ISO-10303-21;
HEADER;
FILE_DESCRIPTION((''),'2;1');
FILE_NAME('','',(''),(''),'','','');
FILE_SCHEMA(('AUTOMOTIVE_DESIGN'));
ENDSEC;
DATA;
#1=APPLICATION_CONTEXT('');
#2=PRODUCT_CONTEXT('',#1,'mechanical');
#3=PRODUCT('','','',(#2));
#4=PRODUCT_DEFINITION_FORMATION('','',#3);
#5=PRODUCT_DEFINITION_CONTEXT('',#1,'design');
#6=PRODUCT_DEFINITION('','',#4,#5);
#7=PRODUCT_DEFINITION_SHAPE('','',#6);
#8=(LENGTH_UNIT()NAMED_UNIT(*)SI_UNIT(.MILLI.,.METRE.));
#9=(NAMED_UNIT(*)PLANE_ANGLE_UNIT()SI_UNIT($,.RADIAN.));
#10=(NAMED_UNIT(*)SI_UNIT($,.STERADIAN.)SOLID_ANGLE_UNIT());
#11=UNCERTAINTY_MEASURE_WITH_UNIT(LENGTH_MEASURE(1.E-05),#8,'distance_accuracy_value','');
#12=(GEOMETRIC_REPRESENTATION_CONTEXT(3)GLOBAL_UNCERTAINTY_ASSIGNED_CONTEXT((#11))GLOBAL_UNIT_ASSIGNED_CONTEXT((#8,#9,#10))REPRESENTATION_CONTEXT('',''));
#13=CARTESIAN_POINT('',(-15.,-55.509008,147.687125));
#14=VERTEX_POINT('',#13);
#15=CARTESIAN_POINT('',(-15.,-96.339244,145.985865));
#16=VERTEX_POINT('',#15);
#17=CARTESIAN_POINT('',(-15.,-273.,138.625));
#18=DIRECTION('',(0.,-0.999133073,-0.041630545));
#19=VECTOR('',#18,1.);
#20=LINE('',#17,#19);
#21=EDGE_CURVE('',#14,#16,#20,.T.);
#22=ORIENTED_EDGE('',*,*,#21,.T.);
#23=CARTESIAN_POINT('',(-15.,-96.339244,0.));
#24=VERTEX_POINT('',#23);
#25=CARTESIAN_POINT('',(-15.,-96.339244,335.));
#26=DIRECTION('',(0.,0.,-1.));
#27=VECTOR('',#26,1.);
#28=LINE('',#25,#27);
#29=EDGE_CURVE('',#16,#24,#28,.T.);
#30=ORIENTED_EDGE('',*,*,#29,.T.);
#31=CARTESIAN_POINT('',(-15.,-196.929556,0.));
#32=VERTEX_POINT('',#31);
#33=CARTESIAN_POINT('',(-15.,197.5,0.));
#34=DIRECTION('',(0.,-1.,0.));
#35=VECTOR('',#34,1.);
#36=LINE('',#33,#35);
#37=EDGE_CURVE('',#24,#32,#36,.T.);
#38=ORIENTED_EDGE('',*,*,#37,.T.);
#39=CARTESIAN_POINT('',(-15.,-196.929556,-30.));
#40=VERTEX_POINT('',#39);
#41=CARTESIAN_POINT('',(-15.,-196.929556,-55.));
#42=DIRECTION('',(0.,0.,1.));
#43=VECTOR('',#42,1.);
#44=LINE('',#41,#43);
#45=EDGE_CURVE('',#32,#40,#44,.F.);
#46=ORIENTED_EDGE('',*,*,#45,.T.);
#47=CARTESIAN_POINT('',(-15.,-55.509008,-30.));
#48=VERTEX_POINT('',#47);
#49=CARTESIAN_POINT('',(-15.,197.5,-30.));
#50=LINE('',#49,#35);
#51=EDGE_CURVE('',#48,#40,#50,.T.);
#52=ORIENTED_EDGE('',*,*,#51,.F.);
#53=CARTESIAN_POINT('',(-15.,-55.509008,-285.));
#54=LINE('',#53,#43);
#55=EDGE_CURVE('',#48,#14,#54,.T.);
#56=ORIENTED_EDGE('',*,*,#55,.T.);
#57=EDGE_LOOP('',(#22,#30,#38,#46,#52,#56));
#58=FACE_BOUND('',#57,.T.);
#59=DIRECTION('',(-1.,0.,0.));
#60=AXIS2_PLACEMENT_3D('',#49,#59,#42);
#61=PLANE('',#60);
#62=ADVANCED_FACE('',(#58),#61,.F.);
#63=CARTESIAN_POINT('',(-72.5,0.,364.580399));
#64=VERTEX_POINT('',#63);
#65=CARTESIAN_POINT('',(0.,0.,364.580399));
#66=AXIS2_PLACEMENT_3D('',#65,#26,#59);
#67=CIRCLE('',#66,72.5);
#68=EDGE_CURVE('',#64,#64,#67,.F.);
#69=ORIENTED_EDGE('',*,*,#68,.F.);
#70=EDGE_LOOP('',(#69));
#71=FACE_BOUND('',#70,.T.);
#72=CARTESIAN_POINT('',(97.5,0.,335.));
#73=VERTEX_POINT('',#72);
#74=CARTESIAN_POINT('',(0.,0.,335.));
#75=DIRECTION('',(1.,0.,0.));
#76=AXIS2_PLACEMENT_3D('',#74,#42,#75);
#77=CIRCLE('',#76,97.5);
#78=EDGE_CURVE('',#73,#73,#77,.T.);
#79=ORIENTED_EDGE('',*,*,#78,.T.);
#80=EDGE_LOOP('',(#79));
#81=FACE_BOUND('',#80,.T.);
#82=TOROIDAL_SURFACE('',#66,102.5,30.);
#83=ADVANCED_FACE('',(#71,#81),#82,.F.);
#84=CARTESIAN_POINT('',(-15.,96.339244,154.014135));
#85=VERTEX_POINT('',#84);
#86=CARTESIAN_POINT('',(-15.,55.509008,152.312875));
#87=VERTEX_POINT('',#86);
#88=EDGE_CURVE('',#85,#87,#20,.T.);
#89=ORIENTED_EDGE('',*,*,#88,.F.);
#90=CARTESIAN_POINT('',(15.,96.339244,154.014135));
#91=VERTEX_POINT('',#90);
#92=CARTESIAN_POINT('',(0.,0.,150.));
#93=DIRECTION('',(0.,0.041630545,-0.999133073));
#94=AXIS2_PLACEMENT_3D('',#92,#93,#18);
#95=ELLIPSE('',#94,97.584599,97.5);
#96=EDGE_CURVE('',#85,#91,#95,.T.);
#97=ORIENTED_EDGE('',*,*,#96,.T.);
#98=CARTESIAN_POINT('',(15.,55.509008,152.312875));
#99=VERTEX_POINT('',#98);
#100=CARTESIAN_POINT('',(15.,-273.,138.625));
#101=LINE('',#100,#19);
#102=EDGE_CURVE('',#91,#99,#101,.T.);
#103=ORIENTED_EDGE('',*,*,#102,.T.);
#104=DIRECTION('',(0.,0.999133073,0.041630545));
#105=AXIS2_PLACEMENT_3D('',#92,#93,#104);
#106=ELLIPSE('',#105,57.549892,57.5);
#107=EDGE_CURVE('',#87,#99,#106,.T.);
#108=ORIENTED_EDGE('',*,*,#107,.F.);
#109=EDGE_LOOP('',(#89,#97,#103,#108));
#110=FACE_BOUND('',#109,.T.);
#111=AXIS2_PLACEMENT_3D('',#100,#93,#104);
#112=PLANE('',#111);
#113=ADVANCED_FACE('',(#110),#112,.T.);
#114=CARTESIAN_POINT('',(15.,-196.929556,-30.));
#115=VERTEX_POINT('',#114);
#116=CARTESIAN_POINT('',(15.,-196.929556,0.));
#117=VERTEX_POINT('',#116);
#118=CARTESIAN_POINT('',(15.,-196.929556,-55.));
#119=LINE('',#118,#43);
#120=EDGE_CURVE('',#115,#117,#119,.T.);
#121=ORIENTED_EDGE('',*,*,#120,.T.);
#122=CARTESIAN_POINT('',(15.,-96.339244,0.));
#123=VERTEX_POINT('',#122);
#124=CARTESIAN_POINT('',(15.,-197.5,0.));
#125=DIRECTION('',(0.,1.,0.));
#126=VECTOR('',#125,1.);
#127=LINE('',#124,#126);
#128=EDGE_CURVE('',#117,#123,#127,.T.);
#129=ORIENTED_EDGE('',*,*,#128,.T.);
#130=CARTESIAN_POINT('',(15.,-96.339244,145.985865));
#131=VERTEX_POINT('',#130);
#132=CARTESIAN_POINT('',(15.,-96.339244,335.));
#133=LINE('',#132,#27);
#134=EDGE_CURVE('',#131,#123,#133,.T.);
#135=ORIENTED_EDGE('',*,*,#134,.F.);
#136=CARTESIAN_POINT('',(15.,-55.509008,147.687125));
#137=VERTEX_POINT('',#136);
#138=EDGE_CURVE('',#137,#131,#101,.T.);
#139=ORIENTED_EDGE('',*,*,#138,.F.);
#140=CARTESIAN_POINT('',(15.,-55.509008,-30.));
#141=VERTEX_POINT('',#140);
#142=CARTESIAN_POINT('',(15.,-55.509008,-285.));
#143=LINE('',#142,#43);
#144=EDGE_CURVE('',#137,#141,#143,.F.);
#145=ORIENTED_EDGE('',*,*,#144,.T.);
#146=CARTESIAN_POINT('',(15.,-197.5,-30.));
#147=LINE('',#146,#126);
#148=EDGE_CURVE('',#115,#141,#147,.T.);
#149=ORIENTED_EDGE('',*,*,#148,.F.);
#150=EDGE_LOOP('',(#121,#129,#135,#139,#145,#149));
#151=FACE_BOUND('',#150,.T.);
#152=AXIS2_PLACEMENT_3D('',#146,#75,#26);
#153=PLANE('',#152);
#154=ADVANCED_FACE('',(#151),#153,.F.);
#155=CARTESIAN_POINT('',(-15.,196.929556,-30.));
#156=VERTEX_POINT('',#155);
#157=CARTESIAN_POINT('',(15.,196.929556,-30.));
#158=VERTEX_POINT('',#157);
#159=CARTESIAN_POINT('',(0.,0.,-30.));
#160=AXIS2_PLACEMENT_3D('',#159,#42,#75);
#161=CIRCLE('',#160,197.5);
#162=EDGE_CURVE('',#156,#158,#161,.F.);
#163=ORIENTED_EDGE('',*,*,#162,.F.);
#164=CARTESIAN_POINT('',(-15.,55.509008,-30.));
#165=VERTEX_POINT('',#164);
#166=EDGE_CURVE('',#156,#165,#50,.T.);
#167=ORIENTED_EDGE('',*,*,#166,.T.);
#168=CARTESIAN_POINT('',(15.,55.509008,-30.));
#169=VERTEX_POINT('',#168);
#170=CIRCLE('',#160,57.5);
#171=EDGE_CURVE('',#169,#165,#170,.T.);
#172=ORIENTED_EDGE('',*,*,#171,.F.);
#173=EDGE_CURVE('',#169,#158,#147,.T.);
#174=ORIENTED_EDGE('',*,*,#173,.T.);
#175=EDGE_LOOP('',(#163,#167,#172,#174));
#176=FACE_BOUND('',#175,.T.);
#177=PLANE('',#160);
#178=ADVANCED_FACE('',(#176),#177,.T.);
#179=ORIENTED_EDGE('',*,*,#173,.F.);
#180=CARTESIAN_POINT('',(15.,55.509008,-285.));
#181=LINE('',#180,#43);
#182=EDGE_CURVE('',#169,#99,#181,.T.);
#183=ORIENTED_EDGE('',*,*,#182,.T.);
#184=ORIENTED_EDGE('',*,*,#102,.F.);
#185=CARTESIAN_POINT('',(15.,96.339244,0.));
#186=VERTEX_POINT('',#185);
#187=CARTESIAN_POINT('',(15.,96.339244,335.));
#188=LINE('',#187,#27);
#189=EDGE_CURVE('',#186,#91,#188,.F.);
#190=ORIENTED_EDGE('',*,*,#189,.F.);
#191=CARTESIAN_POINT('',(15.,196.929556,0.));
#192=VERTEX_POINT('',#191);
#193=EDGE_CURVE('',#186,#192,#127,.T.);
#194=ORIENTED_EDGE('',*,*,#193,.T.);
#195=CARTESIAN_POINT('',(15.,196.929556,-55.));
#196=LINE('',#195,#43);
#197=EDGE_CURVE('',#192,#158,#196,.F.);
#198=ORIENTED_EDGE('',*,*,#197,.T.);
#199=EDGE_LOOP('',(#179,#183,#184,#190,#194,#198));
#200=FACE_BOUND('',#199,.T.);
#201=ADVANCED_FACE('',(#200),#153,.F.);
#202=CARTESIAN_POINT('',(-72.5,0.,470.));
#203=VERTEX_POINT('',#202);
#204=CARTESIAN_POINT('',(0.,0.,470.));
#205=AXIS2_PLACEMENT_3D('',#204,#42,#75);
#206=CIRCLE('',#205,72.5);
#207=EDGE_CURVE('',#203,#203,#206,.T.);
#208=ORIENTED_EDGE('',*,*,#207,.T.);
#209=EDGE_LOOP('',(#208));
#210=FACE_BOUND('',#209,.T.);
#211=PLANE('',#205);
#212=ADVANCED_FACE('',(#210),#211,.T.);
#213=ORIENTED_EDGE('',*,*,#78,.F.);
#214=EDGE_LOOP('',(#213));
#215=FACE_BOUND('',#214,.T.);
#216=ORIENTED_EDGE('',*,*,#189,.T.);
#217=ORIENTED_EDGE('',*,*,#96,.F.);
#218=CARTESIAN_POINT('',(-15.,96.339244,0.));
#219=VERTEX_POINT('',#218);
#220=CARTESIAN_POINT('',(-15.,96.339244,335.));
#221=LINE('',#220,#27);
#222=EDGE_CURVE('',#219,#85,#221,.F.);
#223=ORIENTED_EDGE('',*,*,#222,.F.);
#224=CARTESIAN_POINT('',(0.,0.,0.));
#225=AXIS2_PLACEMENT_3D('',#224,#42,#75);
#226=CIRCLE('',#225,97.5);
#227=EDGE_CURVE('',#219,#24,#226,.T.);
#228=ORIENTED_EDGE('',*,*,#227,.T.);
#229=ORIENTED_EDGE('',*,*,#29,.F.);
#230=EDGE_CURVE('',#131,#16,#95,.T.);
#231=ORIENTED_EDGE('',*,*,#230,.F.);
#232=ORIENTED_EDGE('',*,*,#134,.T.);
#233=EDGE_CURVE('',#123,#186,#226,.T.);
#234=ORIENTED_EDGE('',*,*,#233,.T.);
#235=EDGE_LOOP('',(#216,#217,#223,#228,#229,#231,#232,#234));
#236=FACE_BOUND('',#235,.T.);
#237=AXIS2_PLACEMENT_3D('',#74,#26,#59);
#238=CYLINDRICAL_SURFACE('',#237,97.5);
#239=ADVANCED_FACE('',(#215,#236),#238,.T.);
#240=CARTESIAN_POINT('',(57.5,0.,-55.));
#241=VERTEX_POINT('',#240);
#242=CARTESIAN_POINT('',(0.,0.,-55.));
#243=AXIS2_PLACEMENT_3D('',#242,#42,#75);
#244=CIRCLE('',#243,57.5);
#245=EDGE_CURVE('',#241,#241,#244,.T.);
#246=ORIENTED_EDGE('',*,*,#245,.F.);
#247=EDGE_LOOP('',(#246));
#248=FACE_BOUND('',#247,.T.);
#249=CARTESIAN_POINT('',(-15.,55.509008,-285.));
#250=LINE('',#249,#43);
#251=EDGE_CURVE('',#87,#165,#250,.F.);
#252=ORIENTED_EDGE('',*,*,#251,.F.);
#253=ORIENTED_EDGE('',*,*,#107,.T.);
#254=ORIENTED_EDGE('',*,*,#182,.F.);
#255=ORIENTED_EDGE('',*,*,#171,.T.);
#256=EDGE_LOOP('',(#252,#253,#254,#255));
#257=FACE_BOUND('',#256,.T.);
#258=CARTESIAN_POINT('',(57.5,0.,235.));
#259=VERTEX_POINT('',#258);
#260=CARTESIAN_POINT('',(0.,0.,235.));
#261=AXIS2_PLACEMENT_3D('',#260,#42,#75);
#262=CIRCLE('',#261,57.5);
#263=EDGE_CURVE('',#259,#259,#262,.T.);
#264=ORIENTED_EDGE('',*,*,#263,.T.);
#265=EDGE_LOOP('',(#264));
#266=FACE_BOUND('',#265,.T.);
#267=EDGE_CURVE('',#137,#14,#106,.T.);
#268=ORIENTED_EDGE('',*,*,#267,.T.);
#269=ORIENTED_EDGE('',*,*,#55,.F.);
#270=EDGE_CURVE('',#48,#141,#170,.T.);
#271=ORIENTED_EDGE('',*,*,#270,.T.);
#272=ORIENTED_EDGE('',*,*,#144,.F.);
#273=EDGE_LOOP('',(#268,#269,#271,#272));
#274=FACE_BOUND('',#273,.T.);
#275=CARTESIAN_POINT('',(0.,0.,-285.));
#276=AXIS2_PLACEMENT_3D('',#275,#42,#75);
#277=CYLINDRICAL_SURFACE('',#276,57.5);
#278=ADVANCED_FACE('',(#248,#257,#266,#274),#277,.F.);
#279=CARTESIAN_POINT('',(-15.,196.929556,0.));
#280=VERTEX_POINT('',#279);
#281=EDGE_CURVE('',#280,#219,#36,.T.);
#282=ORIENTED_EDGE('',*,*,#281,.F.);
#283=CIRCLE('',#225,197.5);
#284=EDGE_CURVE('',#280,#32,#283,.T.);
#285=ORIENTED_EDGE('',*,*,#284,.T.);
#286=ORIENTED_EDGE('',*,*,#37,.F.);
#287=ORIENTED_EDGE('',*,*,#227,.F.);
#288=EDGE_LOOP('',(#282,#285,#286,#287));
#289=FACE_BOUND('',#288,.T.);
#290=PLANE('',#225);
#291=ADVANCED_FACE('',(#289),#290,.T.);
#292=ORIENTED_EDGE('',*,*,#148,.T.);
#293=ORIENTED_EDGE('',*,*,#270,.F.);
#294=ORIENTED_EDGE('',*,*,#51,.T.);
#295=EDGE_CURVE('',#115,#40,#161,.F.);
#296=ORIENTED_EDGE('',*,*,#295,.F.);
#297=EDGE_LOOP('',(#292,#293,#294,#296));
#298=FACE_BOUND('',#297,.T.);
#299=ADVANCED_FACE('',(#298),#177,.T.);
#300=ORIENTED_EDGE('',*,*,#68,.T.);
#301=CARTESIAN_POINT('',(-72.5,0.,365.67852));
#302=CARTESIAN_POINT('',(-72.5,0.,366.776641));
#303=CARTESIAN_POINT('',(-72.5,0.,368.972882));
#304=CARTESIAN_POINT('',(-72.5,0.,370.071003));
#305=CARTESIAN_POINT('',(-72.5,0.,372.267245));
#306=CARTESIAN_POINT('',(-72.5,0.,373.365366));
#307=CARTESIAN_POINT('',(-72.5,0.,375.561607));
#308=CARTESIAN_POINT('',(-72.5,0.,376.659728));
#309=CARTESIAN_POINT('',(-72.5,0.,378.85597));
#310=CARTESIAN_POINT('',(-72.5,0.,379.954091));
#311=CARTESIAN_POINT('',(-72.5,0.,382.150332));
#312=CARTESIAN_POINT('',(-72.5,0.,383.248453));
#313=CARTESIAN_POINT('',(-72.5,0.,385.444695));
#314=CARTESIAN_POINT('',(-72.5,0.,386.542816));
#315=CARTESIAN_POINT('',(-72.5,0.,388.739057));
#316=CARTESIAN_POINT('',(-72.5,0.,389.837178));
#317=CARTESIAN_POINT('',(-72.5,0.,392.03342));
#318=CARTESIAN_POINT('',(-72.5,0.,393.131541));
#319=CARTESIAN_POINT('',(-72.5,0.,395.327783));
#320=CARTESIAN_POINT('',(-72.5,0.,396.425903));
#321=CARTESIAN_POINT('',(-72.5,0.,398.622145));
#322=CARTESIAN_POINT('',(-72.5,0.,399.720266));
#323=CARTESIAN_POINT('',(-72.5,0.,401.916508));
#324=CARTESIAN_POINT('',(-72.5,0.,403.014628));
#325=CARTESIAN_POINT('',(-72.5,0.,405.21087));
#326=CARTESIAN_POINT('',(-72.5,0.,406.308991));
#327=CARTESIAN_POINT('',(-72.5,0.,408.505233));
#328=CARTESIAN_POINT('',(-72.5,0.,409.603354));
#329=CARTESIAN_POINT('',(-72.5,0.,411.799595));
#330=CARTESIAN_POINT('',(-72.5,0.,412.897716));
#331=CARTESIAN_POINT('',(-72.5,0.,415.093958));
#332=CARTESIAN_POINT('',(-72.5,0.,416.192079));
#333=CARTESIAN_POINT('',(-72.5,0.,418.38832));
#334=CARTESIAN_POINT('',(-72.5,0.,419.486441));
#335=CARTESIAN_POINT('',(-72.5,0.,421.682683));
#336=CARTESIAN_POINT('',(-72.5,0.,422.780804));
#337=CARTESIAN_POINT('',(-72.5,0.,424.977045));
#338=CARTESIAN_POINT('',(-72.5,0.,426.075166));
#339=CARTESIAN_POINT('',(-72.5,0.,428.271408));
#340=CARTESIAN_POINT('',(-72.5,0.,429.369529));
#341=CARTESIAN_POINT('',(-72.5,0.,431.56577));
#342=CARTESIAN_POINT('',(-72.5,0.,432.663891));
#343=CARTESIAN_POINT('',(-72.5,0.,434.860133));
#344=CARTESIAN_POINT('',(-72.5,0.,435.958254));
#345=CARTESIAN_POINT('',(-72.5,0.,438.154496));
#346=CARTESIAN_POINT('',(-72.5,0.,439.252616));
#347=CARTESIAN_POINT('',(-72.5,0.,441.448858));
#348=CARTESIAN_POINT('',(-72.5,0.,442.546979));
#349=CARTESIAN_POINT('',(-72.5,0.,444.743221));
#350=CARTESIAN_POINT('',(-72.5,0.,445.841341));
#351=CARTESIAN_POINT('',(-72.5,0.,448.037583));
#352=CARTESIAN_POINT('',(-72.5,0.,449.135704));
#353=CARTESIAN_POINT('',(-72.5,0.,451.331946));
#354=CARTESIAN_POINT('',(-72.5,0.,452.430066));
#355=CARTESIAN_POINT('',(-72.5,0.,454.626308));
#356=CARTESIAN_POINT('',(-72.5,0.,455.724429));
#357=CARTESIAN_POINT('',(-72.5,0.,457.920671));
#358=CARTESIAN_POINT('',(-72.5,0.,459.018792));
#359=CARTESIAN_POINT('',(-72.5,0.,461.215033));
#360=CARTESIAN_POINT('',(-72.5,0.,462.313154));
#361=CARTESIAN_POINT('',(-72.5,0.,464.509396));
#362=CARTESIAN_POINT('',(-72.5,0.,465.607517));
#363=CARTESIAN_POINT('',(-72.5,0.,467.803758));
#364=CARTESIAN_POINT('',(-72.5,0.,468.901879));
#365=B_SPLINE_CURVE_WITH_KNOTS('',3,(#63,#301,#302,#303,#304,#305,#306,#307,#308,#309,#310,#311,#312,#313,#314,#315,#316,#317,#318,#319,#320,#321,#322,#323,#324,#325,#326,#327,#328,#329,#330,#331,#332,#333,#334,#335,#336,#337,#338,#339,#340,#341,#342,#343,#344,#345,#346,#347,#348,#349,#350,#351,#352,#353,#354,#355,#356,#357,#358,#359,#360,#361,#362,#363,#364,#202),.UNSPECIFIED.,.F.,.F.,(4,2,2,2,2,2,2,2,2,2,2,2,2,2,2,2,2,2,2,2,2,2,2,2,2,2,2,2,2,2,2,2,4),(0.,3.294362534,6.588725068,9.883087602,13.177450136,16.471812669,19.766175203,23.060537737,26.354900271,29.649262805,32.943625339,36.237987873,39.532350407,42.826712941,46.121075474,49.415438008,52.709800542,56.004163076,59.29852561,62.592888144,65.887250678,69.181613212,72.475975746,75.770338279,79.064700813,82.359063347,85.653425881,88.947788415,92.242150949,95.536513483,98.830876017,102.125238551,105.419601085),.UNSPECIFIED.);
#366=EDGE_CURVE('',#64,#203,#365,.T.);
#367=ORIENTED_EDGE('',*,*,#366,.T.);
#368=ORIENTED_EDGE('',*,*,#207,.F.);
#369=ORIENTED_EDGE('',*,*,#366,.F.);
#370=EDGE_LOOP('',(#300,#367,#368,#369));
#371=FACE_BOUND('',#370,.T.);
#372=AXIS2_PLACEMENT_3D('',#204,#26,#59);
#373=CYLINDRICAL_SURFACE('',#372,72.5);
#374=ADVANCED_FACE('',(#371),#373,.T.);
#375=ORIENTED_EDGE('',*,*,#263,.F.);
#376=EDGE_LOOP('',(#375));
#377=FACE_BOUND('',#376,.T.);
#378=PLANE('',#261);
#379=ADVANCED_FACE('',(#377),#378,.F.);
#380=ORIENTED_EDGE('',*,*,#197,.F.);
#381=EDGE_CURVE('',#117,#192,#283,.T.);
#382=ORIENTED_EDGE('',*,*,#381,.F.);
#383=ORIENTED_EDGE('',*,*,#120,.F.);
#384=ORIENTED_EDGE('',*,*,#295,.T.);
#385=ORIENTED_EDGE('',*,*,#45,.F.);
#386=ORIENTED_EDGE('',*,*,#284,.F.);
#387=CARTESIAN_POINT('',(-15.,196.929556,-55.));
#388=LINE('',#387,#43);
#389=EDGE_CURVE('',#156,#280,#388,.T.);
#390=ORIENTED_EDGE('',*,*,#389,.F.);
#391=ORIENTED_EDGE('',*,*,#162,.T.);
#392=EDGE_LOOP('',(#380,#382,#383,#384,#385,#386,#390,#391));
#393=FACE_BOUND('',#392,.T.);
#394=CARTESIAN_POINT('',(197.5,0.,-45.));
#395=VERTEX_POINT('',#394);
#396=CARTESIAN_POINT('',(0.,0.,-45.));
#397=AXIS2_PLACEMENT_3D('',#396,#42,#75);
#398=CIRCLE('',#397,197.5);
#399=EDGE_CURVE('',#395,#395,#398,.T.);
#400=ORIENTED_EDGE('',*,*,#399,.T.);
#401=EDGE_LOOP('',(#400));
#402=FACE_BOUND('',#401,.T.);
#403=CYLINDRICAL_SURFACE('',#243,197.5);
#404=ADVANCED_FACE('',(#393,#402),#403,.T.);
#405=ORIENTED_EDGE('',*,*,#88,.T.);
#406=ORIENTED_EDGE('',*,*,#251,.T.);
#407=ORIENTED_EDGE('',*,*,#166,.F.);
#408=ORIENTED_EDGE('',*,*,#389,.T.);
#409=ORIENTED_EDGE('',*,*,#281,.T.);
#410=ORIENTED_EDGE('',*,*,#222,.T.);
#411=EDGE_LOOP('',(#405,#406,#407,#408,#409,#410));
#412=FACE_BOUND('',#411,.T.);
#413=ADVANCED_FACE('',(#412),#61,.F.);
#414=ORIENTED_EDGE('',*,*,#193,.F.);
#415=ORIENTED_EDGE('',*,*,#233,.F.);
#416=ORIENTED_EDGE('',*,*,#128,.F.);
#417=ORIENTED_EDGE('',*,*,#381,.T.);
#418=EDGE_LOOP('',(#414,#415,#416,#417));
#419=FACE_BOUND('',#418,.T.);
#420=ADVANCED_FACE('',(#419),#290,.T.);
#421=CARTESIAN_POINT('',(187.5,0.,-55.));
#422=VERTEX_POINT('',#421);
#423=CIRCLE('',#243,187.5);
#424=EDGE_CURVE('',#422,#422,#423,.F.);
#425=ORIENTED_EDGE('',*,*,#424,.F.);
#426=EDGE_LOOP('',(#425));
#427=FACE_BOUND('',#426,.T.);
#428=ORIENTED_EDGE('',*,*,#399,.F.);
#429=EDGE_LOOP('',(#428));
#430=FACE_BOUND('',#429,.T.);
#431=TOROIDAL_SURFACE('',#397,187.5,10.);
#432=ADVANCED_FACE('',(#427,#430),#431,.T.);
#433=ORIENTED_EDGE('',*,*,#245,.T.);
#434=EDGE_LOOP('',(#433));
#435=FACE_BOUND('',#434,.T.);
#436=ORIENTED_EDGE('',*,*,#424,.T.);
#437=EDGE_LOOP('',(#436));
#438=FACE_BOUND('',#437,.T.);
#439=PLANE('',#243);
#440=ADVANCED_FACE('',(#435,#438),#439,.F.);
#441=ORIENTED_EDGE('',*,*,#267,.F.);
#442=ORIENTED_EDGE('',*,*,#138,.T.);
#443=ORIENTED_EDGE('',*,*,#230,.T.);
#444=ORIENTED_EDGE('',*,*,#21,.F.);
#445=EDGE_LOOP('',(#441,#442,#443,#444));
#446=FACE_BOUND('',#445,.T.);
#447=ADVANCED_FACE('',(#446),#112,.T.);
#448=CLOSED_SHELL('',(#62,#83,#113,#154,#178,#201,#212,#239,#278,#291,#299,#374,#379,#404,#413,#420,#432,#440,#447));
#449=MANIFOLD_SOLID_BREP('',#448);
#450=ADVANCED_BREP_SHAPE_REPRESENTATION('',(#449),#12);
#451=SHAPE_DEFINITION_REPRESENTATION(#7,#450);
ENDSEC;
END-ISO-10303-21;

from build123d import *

# Parameters (mm, degrees)
SKETCH1_R               = 197.5
BOSS_EXTRUDE1_DEPTH     = 55
SKETCH2_R               = 97.5
BOSS_EXTRUDE2_DEPTH     = 335
SKETCH3_R               = 72.5
BOSS_EXTRUDE3_DEPTH     = 470
CUT_EXTRUDE1_DEPTH      = 30
CUT_EXTRUDE2_DEPTH      = 15
CUT_EXTRUDE2_DEPTH_BACK = 15
CUT_EXTRUDE3_DEPTH      = 235
CUT_EXTRUDE3_DEPTH_BACK = 285
SKETCH8_R               = 57.5
FILLET1_R               = 30
FILLET2_R               = 10


with BuildPart() as part:
    # Sketch1 → Boss-Extrude1 (new body)
    with BuildSketch(Plane.XY):
        Circle(SKETCH1_R)
    extrude(amount=-BOSS_EXTRUDE1_DEPTH)

    # Sketch2 → Boss-Extrude2 (add)
    with BuildSketch(Plane.XY):
        Circle(SKETCH2_R)
    extrude(amount=BOSS_EXTRUDE2_DEPTH)

    # Sketch3 → Boss-Extrude3 (add)
    with BuildSketch(Plane.XY):
        with Locations(Location((0, 0, 0), (0, 0, 180))):
            Circle(SKETCH3_R)
    extrude(amount=BOSS_EXTRUDE3_DEPTH)

    # Sketch4 → Cut-Extrude1 (cut)
    with BuildSketch(Plane.XY):
        Polygon((0, 197.5), (-15, 197.5), (-15, -197.5), (0, -197.5), (15, -197.5), (15, 197.5), align=None)
    extrude(amount=-CUT_EXTRUDE1_DEPTH, mode=Mode.SUBTRACT)

    # Sketch7 → Cut-Extrude2 (cut, two sides: drawn at the far end of the back side and taken through both)
    with BuildSketch(Plane(origin=(0, 0, 0), x_dir=(0, 0, -1), z_dir=(1, 0, 0)).offset(-CUT_EXTRUDE2_DEPTH_BACK)):
        Polygon((0, 0), (0, 273), (-161.375, 273), (-138.625, -273), (0, -273), align=None)
    extrude(amount=CUT_EXTRUDE2_DEPTH + CUT_EXTRUDE2_DEPTH_BACK, mode=Mode.SUBTRACT)

    # Sketch8 → Cut-Extrude3 (cut, two sides: drawn at the far end of the back side and taken through both)
    with BuildSketch(Plane.XY.offset(-CUT_EXTRUDE3_DEPTH_BACK)):
        Circle(SKETCH8_R)
    extrude(amount=CUT_EXTRUDE3_DEPTH + CUT_EXTRUDE3_DEPTH_BACK, mode=Mode.SUBTRACT)

    # Fillet1
    # the kernel refuses this fillet: 30 mm, written as the material it adds along each edge
    with BuildSketch(Plane(origin=(0, 0, 335), x_dir=(-1, 0, 0), z_dir=(0, -1, 0))) as fillet1_piece_1:
        with BuildLine():
            CenterArc((102.5, -29.580398916), FILLET1_R, 99.594068227, 80.405931773)
            Line((72.5, -29.580398916), (71.9, -29.580398916))
            Line((71.9, -29.580398916), (71.9, 0))
            Line((71.9, 0), (72.5, 0.6))
            ThreePointArc((72.5, 0.6), (85, 0.6), (97.4, 0.591607978))
            Line((97.4, 0.591607978), (97.5, 0))
        make_face()
    revolve(axis=Axis((0, 0, 335), (0, 0, -1)))

    # Fillet2
    fillet2_edges = [part.edges().sort_by_distance(p)[0] for p in [
        (-197.5, 0, -55),
    ]]
    fillet(fillet2_edges, radius=FILLET2_R)


solid = part.part
